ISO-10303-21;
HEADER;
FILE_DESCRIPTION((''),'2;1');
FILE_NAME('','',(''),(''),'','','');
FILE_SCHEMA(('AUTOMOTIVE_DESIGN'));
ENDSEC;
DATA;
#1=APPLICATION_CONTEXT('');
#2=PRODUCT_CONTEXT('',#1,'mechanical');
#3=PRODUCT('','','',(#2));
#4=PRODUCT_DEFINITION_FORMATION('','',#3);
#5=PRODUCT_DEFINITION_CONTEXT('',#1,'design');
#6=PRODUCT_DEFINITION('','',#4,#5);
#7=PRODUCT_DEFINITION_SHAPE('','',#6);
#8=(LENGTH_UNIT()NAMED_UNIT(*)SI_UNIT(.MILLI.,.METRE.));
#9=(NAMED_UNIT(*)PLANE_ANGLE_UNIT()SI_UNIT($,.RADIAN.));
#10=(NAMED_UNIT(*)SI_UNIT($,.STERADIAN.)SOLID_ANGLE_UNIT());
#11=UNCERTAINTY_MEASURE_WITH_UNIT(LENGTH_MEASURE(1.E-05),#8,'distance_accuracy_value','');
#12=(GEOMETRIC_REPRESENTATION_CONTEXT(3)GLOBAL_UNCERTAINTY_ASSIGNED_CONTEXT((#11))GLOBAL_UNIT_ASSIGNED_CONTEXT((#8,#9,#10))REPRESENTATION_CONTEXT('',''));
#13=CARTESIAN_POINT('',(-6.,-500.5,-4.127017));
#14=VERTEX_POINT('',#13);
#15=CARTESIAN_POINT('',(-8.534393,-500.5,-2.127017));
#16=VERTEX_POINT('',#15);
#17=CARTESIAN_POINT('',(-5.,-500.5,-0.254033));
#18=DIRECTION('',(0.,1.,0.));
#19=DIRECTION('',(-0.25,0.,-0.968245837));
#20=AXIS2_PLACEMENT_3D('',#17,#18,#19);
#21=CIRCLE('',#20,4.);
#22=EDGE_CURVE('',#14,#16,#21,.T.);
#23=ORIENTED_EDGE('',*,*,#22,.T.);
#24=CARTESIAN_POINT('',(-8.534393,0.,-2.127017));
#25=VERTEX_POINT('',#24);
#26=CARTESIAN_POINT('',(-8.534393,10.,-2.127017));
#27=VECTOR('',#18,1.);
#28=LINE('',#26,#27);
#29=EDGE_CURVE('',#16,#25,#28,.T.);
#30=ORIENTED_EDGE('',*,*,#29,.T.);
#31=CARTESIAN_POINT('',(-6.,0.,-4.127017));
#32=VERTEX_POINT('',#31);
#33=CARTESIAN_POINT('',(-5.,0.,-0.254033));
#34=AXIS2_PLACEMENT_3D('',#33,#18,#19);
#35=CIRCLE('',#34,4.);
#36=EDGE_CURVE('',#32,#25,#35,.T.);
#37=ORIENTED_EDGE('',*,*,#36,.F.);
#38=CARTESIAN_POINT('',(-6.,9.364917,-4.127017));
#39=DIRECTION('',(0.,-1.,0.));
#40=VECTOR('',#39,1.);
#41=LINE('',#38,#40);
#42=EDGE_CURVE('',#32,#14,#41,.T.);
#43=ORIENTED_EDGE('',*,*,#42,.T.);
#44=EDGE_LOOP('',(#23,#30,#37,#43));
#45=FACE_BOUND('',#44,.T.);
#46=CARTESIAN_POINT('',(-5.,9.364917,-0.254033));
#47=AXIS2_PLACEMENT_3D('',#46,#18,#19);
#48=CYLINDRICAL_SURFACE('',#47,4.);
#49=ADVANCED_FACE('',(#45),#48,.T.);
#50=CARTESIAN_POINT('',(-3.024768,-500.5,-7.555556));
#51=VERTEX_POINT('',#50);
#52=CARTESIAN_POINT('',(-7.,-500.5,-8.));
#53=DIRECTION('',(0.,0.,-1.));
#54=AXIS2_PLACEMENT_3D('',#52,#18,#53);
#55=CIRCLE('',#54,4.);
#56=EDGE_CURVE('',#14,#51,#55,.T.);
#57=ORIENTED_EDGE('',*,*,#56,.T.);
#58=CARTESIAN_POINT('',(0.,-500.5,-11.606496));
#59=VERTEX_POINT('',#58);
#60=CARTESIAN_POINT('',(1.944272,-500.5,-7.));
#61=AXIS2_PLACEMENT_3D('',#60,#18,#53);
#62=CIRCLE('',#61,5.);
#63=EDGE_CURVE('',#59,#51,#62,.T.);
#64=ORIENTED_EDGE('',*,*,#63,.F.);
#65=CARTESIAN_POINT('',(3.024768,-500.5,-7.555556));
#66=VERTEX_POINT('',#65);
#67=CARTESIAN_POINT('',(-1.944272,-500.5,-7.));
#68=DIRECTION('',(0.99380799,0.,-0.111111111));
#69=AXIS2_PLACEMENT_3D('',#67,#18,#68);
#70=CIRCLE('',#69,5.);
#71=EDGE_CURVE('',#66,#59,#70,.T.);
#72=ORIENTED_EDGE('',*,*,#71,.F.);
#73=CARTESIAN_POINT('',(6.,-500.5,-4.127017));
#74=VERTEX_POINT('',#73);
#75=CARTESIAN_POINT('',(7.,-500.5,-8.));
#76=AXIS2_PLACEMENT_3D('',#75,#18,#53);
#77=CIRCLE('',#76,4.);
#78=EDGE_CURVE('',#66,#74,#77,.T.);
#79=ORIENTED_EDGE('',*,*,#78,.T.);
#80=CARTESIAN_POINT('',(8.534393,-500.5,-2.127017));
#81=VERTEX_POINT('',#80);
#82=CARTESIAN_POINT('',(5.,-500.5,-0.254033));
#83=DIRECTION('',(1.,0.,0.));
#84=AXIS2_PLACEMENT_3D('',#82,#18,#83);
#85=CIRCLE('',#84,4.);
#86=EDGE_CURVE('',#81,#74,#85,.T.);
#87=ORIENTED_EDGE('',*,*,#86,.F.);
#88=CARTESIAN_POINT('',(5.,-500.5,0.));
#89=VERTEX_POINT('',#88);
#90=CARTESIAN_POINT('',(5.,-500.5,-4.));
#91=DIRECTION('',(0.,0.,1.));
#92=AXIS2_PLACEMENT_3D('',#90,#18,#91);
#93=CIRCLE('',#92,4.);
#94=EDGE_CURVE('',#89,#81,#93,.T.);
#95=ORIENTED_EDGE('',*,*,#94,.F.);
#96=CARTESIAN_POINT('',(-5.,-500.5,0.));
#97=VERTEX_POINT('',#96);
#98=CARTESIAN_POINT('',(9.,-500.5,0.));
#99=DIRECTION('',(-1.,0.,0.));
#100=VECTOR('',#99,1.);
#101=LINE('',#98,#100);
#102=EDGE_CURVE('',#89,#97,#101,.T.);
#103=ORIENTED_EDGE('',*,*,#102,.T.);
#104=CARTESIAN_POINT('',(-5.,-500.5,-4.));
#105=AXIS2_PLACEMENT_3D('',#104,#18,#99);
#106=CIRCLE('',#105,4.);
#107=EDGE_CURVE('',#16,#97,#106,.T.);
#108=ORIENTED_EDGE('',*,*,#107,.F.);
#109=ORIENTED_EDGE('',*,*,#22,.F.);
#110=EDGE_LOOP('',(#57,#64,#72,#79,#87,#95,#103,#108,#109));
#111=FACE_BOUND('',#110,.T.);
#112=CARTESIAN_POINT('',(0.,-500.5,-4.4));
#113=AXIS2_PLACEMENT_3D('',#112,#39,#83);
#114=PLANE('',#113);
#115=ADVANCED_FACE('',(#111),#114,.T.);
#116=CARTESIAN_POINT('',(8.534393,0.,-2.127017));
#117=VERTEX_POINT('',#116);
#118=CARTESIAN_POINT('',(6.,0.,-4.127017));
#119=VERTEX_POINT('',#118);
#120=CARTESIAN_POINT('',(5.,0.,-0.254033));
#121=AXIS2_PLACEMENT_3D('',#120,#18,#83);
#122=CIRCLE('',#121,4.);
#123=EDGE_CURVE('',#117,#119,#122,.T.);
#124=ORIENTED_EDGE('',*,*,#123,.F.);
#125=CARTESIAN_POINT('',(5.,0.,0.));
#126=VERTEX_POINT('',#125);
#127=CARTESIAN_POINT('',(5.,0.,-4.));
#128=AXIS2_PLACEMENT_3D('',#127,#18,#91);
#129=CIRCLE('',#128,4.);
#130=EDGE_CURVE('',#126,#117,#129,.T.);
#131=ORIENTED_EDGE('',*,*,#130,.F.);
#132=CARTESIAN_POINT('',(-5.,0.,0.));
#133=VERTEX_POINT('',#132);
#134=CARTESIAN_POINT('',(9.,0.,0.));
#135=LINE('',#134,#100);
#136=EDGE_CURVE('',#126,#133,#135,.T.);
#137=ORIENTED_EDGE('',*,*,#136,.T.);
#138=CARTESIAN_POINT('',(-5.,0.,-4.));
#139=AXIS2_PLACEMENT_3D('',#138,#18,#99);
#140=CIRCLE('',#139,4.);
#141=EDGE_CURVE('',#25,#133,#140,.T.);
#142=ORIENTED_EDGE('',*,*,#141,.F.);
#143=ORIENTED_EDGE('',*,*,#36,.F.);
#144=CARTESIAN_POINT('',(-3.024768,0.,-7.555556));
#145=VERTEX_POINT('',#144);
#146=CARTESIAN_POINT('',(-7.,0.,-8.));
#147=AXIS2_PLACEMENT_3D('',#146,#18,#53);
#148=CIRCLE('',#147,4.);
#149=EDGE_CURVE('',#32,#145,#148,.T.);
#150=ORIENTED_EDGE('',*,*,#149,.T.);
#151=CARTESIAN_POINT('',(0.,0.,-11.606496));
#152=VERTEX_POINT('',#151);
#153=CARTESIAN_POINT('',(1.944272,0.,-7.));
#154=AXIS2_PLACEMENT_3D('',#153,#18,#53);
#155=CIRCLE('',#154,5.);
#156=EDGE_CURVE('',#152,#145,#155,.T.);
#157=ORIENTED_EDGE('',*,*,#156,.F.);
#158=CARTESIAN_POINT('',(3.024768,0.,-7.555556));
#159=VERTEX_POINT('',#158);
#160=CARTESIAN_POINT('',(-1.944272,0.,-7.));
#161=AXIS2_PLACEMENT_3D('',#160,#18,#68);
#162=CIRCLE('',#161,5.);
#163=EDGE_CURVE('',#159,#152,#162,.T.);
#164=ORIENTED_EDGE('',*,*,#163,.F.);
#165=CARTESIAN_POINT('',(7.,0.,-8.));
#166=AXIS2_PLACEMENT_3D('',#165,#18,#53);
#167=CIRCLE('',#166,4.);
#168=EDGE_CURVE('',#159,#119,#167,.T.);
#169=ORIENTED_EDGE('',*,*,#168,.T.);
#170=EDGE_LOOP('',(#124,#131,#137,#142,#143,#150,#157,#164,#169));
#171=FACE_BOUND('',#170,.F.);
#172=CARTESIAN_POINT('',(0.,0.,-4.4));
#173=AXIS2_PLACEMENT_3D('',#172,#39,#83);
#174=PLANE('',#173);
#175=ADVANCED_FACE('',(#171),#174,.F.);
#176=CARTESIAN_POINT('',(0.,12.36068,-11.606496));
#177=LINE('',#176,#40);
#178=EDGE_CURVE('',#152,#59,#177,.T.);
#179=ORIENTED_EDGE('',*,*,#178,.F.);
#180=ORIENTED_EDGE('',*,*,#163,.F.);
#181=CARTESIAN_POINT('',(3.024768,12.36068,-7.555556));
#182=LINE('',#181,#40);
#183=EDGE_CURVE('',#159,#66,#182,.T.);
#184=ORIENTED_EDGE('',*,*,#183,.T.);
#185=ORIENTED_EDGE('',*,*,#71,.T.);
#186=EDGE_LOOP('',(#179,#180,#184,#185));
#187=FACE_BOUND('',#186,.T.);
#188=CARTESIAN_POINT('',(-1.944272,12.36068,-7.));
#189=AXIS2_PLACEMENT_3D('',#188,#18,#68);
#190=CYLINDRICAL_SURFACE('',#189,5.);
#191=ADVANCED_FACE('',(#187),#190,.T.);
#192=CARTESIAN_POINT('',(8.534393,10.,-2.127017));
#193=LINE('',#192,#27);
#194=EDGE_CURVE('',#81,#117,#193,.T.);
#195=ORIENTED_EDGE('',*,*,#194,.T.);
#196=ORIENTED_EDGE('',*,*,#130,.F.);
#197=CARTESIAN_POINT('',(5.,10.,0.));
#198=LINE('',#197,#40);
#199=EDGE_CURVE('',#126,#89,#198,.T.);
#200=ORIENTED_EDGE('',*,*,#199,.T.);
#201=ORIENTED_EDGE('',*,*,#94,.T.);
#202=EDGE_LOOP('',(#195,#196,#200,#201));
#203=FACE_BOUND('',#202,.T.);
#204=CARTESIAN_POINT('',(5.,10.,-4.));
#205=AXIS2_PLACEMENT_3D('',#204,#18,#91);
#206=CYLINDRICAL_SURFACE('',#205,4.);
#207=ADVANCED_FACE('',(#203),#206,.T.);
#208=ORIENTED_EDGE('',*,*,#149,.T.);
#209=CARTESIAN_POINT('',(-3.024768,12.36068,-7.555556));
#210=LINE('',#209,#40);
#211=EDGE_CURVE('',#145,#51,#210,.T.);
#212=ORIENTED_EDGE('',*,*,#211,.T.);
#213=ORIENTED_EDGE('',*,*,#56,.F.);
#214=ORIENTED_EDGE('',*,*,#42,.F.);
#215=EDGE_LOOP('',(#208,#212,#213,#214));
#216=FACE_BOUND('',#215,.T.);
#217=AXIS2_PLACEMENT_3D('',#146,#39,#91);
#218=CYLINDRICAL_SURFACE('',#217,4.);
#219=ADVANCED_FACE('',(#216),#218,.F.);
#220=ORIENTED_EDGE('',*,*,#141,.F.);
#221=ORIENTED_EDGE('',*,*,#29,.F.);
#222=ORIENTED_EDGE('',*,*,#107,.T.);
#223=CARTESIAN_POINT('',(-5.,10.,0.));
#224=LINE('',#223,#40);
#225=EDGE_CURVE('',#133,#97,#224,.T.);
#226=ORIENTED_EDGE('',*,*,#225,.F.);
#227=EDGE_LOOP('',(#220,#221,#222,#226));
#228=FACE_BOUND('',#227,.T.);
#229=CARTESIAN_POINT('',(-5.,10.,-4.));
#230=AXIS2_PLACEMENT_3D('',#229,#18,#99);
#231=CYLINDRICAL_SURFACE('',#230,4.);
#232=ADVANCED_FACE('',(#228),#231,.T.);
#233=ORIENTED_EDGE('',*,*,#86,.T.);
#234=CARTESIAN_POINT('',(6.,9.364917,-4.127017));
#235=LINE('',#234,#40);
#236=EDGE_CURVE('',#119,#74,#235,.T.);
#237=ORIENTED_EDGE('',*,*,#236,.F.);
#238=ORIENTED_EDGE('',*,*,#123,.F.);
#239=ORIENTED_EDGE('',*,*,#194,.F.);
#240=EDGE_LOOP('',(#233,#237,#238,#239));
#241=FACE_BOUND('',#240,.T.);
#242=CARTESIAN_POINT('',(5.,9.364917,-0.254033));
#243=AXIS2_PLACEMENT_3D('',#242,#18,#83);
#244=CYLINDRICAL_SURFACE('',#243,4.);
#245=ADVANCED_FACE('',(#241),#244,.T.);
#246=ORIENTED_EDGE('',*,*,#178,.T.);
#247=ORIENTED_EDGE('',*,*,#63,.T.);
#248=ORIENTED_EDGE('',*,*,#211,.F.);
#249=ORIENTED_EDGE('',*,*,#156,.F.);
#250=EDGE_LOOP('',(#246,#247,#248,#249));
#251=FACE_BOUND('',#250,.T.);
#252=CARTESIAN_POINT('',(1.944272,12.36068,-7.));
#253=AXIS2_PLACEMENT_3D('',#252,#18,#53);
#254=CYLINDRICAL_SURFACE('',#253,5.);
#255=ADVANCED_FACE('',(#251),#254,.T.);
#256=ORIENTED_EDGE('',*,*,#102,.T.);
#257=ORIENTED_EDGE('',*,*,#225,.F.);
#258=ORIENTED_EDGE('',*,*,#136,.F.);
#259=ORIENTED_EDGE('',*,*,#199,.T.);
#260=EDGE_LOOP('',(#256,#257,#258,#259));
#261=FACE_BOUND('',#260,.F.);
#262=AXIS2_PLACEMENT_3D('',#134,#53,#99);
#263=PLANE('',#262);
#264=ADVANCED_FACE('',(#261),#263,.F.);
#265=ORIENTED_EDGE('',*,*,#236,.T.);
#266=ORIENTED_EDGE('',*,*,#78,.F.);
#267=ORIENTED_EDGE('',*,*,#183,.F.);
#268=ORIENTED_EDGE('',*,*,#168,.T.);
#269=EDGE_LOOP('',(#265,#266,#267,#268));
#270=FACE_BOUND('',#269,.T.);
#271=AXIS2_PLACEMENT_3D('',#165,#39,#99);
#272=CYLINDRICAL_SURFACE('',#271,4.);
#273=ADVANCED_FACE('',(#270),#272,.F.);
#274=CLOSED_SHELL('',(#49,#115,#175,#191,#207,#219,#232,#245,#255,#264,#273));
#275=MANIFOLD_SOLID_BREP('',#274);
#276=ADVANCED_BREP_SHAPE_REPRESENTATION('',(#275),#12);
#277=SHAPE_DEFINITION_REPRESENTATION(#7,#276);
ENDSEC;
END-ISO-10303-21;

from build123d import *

# Parameters (mm, degrees)
F1_DEPTH    = 500.5
F2_R        = 4
F3_T1_DEPTH = 520.5
F3_T3_DEPTH = 519.2298334621
F4_T1_DEPTH = 525.22135955


# Not quite as in the source:
# - a fillet or chamfer that OpenCascade refuses, or shapes differently, is made with other operations: its cross-section is extruded or revolved along the edge and cut away or added


with BuildPart() as f1:
    # F0 (on Front) → F1 (new body)
    with BuildSketch(Plane.XZ):
        Polygon((9, 0), (0, 0), (-9, 0), (-9, -4), (-3, -4), (-3, -12), (3, -12), (3, -4), (9, -4), align=None)
    extrude(amount=F1_DEPTH)

    # F2
    f2_edges = [f1.edges().sort_by_distance(p)[0] for p in [
        (3, -250.25, -4),
        (-3, -250.25, -4),
    ]]
    fillet(f2_edges, radius=F2_R)

    # F3: fillet of radius 4 on 4 edges, made by hand

    # F3_s2 → F3_t1 (cut)
    with BuildSketch(Plane.XZ.offset(-10)):
        with BuildLine():
            ThreePointArc((-9, -4), (-7.8284271247, -1.1715728753), (-5, 0))
            Line((-5, 0), (-9, 0))
            Line((-9, 0), (-9, -4))
        make_face()
        with BuildLine():
            ThreePointArc((5, 0), (7.8284271247, -1.1715728753), (9, -4))
            Line((9, -4), (9, 0))
            Line((9, 0), (5, 0))
        make_face()
    extrude(amount=F3_T1_DEPTH, mode=Mode.SUBTRACT)

    # F3_s4 → F3_t3 (cut)
    with BuildSketch(Plane.XZ.offset(-9.364916731)):
        with BuildLine():
            ThreePointArc((-6, -4.1270166538), (-8.1622776602, -2.7035230504), (-9, -0.2540333076))
            Line((-9, -0.2540333076), (-9.4, -0.2540333076))
            Line((-9.4, -0.2540333076), (-9.4, -4))
            Line((-9.4, -4), (-9, -4.4))
            ThreePointArc((-9, -4.4), (-7, -4.4), (-6.1, -4.5143149884))
            Line((-6.1, -4.5143149884), (-6, -4.1270166538))
        make_face()
        with BuildLine():
            ThreePointArc((9, -0.2540333076), (8.1622776602, -2.7035230504), (6, -4.1270166538))
            Line((6, -4.1270166538), (6.1, -4.5143149884))
            ThreePointArc((6.1, -4.5143149884), (7, -4.4), (9, -4.4))
            Line((9, -4.4), (9.4, -4))
            Line((9.4, -4), (9.4, -0.2540333076))
            Line((9.4, -0.2540333076), (9, -0.2540333076))
        make_face()
    extrude(amount=F3_T3_DEPTH, mode=Mode.SUBTRACT)

    # F4: fillet of radius 5 on 2 edges, made by hand

    # F4_s2 → F4_t1 (cut)
    with BuildSketch(Plane.XZ.offset(-12.360679775)):
        with BuildLine():
            ThreePointArc((3.02476804, -7.5555555556), (1.3890614233, -10.7267799625), (-1.94427191, -12))
            Line((-1.94427191, -12), (-1.94427191, -12.5))
            Line((-1.94427191, -12.5), (3, -12.5))
            Line((3, -12.5), (3.5, -12))
            ThreePointArc((3.5, -12), (3.5, -8), (3.521672035, -7.6111111111))
            Line((3.521672035, -7.6111111111), (3.02476804, -7.5555555556))
        make_face()
        with BuildLine():
            ThreePointArc((1.94427191, -12), (-1.3890614233, -10.7267799625), (-3.02476804, -7.5555555556))
            Line((-3.02476804, -7.5555555556), (-3.521672035, -7.6111111111))
            ThreePointArc((-3.521672035, -7.6111111111), (-3.5, -8), (-3.5, -12))
            Line((-3.5, -12), (-3, -12.5))
            Line((-3, -12.5), (1.94427191, -12.5))
            Line((1.94427191, -12.5), (1.94427191, -12))
        make_face()
    extrude(amount=F4_T1_DEPTH, mode=Mode.SUBTRACT)


solid = f1.part
